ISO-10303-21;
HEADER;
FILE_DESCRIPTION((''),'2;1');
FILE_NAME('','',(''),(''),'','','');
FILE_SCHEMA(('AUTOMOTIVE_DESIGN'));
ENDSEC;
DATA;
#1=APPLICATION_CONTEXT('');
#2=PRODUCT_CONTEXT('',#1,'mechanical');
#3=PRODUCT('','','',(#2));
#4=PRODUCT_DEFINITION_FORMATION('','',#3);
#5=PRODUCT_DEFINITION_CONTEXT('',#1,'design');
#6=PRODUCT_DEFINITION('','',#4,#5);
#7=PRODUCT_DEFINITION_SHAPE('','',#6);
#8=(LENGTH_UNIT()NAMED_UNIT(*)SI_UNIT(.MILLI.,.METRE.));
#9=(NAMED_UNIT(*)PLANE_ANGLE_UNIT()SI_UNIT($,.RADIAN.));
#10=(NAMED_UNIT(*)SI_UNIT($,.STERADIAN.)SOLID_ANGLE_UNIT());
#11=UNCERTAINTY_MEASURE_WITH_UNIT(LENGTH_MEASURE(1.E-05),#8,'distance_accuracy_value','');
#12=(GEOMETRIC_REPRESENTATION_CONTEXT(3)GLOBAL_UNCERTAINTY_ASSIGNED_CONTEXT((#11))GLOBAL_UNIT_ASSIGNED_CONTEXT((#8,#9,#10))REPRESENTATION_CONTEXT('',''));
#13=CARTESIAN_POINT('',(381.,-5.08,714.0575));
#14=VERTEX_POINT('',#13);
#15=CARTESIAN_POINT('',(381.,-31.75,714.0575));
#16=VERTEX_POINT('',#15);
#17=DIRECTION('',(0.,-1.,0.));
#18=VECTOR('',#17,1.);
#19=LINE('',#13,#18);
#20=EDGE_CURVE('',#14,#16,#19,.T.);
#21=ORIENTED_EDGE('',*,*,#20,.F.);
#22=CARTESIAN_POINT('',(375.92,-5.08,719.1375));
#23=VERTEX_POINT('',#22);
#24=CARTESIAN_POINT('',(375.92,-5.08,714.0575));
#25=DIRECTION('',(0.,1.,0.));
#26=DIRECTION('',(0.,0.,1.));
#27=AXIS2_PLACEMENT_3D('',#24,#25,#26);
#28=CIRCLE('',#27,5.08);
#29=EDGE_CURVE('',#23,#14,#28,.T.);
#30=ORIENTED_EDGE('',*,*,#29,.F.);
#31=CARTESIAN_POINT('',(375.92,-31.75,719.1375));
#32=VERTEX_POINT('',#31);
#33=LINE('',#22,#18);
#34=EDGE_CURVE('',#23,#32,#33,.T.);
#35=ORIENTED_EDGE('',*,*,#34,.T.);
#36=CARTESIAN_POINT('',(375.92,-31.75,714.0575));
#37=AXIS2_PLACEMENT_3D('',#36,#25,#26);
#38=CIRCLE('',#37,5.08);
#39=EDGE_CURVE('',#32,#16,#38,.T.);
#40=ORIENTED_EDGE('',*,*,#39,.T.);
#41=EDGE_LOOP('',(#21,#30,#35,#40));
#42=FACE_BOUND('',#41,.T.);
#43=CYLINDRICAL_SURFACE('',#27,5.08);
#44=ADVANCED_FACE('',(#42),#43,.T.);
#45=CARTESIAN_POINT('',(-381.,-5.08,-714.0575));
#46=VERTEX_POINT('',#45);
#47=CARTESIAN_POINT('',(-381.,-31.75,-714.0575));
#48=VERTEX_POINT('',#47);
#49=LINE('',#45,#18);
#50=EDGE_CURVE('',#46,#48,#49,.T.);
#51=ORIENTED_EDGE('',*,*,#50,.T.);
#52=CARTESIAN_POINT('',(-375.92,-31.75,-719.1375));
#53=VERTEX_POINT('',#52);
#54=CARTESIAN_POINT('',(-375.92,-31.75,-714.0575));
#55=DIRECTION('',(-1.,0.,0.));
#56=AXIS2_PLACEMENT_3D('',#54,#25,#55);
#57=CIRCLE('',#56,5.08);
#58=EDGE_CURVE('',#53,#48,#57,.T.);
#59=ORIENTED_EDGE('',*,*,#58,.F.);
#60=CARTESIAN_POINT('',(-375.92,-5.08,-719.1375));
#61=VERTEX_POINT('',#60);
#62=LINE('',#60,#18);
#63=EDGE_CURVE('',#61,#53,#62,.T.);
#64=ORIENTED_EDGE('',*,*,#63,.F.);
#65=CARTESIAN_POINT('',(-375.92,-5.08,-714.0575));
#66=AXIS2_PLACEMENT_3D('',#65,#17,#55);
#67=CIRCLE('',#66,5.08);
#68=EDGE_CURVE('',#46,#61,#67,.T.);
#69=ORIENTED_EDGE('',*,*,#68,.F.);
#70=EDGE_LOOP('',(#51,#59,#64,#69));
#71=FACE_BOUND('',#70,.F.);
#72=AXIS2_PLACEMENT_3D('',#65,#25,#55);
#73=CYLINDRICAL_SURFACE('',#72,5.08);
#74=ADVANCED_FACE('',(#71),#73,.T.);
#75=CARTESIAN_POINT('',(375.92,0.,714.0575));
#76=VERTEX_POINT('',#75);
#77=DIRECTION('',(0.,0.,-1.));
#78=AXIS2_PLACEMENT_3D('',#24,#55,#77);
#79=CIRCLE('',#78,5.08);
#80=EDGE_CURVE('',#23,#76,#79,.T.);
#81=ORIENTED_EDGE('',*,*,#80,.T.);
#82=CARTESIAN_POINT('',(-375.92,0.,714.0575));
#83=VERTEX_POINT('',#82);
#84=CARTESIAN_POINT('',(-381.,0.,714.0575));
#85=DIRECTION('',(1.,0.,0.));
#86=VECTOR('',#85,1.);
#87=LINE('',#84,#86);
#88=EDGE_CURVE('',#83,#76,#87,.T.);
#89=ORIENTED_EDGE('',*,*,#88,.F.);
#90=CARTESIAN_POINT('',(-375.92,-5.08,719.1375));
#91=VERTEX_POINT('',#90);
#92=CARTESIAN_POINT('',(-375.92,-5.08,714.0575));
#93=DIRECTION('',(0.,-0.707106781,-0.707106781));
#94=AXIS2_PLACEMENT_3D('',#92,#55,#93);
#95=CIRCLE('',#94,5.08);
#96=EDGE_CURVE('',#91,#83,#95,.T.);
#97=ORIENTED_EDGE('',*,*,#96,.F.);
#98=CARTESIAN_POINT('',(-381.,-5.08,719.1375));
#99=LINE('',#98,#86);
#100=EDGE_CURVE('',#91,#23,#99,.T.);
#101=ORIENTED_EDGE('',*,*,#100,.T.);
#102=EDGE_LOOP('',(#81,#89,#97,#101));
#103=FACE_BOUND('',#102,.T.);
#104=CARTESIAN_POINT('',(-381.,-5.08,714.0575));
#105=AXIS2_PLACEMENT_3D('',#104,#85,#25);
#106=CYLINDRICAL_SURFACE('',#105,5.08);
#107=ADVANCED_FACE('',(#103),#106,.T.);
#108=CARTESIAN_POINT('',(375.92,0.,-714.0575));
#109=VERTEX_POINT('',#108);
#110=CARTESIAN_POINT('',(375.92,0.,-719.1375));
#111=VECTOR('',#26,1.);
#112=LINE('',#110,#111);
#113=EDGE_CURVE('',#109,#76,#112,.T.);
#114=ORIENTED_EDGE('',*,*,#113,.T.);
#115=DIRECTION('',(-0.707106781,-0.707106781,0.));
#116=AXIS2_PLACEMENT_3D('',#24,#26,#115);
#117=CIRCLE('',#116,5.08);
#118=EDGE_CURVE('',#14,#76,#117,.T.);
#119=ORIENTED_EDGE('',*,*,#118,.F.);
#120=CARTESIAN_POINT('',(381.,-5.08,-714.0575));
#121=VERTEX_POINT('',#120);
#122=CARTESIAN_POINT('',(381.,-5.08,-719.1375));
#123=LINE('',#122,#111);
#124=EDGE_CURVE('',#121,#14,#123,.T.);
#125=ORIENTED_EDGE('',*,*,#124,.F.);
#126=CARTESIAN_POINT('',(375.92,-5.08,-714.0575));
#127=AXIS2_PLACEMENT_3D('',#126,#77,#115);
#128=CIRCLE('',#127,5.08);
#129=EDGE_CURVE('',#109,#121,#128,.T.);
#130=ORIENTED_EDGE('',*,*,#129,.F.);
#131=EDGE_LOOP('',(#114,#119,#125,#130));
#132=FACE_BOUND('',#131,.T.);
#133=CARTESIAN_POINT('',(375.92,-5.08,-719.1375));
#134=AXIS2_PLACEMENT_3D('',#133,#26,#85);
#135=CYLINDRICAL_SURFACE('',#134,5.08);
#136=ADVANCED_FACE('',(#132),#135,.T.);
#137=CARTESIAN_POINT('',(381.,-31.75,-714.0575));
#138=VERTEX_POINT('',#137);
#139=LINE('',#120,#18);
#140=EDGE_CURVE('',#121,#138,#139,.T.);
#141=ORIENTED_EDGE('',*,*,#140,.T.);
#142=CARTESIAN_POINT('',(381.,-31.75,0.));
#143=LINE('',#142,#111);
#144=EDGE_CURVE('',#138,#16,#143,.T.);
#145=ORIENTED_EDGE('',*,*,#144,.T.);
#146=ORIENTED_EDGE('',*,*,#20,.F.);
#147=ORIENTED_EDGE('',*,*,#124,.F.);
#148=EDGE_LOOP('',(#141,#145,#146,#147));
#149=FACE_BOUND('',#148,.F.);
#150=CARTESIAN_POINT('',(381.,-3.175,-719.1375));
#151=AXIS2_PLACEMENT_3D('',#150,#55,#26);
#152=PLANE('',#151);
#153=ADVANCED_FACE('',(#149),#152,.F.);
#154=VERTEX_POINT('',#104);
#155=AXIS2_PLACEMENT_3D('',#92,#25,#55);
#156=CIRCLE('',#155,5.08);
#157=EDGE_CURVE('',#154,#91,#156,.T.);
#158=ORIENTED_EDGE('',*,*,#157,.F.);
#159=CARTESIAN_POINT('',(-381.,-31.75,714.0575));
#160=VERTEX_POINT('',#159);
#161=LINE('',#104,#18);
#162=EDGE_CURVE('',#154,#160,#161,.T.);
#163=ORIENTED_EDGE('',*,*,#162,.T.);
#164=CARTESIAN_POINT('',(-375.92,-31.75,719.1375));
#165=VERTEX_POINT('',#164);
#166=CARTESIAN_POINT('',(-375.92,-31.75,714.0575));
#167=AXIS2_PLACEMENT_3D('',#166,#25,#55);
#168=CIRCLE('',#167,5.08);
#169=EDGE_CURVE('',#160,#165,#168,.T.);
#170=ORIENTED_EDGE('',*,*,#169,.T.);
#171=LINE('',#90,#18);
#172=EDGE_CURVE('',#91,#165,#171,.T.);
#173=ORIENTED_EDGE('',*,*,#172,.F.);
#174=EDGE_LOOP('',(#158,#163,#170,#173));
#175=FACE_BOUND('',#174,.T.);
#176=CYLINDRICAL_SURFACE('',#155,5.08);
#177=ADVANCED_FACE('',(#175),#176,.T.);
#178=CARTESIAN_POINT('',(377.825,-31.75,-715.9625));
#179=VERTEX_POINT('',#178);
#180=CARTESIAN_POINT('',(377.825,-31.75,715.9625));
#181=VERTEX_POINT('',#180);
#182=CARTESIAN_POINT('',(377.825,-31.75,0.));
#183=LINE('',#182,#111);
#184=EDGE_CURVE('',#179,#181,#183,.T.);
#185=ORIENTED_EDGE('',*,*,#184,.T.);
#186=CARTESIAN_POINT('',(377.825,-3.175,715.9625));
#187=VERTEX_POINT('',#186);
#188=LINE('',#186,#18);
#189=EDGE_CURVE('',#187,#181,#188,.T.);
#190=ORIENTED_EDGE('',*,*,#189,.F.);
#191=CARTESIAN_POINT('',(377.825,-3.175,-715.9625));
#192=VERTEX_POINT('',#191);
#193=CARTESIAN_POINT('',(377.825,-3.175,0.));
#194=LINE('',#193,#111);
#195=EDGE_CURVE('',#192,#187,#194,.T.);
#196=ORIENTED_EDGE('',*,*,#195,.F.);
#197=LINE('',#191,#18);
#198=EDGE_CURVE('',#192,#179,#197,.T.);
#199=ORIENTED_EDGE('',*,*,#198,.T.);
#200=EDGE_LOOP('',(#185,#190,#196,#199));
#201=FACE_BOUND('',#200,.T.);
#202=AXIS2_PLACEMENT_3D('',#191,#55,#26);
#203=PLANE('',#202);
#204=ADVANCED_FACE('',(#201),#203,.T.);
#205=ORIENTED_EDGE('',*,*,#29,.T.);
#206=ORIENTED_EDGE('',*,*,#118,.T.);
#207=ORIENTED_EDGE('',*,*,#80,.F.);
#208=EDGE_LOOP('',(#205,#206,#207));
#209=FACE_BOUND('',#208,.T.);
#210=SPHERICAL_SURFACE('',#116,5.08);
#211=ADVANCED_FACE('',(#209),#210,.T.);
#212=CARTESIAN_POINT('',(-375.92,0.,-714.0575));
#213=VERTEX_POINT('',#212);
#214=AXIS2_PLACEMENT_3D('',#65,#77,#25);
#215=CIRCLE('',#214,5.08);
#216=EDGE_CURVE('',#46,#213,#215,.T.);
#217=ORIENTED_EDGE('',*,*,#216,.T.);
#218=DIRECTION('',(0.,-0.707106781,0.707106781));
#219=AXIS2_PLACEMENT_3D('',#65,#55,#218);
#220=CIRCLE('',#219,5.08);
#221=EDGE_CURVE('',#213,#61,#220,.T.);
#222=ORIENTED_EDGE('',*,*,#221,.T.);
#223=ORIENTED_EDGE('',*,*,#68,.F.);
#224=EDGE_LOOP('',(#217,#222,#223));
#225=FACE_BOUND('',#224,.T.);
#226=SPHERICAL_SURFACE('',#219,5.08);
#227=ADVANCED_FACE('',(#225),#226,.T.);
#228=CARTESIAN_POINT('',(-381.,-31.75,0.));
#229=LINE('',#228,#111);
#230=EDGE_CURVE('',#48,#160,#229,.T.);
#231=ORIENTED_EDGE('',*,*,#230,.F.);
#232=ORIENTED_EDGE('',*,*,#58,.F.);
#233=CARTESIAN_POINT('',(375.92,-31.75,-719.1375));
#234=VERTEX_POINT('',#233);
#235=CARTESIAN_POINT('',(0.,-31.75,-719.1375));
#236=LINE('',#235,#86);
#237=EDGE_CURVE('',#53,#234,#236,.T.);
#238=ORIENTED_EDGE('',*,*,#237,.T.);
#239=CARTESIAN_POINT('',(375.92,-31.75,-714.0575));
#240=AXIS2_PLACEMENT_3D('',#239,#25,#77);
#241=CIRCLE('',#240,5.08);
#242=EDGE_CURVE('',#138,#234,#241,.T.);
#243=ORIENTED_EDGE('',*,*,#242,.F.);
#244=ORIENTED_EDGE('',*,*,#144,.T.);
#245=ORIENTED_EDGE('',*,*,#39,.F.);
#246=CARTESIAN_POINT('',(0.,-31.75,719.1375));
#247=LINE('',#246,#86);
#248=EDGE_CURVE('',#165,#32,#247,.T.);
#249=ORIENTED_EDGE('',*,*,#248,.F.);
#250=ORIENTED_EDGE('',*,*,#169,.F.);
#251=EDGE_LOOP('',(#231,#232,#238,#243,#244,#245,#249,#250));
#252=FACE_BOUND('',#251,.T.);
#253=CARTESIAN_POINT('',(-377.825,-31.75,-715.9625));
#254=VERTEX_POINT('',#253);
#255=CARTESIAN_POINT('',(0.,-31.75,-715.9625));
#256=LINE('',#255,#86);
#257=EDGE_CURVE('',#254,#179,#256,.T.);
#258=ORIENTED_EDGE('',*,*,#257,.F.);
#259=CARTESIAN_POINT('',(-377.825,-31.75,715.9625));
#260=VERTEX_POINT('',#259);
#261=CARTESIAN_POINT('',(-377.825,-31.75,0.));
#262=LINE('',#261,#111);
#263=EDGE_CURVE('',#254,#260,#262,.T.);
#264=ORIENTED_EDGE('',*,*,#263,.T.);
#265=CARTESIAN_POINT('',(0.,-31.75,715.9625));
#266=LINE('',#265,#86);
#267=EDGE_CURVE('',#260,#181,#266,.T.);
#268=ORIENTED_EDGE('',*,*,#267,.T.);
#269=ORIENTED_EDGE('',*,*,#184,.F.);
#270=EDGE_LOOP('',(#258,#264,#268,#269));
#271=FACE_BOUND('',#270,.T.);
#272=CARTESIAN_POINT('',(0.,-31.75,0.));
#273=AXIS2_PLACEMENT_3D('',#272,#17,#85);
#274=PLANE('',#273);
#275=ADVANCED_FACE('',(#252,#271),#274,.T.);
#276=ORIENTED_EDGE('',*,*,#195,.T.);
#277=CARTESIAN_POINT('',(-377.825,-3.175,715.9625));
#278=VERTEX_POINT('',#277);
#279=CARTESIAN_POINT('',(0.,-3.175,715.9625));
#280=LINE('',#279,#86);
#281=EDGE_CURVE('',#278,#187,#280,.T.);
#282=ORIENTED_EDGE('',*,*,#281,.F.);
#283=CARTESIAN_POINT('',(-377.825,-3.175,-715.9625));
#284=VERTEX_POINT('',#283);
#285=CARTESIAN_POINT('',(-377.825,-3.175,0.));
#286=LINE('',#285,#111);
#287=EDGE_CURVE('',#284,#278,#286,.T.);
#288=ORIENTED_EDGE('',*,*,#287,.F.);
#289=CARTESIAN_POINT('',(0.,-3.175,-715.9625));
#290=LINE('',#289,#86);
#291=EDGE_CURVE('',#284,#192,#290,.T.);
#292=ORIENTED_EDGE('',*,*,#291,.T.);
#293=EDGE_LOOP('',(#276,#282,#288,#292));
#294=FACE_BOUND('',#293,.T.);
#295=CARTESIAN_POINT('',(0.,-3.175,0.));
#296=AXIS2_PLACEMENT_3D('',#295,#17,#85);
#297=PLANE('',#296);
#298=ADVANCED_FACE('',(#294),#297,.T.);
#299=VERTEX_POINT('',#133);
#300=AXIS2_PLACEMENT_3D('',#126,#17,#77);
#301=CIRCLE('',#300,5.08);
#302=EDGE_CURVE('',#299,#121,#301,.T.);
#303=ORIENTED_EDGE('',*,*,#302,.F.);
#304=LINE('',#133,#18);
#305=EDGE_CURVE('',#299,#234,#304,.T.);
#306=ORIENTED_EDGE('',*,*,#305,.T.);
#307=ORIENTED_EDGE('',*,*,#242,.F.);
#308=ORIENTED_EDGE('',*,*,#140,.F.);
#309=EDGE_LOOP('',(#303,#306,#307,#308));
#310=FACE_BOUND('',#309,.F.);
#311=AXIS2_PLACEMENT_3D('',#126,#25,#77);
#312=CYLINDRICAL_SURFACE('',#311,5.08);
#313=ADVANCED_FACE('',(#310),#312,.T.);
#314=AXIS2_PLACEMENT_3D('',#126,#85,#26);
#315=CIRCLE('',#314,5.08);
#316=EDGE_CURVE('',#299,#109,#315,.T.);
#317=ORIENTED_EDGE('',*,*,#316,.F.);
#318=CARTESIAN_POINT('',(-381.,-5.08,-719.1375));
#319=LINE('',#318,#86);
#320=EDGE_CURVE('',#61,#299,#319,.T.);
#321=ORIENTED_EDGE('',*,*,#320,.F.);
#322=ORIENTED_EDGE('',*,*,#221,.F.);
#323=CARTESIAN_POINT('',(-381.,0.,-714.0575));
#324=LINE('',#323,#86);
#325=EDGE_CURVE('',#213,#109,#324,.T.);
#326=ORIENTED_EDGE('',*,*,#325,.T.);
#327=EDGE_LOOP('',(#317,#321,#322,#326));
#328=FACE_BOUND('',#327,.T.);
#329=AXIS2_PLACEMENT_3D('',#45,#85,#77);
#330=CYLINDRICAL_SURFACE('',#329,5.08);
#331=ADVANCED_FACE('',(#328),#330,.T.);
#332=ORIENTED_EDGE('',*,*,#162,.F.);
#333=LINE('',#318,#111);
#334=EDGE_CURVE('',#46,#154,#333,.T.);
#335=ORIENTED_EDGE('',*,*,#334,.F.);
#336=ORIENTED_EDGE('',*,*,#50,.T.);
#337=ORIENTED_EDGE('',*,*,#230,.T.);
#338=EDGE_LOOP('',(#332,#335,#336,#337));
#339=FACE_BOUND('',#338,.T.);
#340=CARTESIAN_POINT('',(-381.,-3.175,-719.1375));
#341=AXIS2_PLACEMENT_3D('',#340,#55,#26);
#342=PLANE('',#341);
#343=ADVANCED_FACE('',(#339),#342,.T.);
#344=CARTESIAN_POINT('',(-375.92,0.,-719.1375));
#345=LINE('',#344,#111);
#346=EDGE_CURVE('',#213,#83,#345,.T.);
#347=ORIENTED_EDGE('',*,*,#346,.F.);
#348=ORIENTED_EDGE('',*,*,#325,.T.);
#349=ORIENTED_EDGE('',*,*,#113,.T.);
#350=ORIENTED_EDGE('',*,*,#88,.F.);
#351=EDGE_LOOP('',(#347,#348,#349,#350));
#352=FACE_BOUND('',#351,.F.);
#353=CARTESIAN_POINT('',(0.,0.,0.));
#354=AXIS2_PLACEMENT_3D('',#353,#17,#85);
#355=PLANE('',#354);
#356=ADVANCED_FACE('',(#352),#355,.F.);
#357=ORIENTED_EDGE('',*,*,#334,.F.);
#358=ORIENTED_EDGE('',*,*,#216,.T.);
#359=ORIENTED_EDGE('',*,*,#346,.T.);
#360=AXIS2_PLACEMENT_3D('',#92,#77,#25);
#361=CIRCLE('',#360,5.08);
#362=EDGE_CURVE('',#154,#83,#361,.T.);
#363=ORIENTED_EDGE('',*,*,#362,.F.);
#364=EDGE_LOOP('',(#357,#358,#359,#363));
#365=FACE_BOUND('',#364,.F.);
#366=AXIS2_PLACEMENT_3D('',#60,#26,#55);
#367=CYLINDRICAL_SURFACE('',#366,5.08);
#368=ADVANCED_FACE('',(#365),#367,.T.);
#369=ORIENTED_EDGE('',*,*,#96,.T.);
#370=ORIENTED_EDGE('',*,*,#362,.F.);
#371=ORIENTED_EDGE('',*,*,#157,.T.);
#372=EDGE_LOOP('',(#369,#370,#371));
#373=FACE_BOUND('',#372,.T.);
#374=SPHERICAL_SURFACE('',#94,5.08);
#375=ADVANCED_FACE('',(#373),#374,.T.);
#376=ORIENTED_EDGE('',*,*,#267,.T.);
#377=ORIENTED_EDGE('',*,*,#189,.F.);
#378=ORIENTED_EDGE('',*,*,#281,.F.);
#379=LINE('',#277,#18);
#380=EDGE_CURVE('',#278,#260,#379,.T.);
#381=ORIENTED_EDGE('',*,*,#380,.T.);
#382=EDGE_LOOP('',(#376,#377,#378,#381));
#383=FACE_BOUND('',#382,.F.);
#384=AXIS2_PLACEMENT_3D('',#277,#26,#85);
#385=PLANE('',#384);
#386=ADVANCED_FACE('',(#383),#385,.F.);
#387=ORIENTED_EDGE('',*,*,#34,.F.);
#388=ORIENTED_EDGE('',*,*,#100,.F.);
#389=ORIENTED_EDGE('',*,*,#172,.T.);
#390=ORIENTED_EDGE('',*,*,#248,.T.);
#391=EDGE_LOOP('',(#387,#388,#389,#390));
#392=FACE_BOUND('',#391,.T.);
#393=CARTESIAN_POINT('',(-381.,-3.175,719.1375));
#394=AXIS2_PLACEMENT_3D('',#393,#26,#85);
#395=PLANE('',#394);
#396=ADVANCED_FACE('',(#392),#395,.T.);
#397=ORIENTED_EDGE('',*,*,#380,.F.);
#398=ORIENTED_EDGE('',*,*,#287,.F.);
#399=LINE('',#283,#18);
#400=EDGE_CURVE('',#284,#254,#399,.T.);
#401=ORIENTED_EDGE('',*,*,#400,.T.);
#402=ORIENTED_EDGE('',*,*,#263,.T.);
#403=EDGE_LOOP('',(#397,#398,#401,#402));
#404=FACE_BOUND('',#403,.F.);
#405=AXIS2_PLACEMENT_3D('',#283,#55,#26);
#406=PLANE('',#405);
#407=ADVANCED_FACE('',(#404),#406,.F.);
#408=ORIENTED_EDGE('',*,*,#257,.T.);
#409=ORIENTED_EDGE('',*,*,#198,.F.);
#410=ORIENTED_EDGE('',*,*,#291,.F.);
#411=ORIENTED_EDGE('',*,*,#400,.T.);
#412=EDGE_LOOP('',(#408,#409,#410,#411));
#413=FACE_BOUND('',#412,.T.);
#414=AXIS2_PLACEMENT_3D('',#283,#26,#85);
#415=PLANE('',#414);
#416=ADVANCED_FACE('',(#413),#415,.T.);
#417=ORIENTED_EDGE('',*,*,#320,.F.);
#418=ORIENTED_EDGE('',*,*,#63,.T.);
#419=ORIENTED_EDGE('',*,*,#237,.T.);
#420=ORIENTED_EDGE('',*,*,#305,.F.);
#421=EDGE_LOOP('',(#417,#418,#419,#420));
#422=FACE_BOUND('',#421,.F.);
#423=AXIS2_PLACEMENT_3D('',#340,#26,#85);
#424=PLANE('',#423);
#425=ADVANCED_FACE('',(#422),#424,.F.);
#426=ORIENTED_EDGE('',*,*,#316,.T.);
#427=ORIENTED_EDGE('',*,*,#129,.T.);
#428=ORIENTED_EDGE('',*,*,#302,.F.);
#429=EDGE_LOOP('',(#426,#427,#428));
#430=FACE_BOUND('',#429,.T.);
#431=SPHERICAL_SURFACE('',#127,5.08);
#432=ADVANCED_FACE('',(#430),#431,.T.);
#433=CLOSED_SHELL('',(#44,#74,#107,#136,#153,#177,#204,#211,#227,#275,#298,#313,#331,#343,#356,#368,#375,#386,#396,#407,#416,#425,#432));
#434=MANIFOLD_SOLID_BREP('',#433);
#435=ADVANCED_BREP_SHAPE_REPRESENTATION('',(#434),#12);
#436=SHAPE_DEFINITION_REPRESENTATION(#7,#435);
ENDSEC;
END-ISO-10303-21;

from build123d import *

# Parameters (mm, degrees)
F0_W         = 762
F0_H         = 1438.275
F1_DEPTH     = 3.175
F2_W         = 762
F2_H         = 1438.275
F2_W_2       = 755.65
F2_H_2       = 1431.925
F3_DEPTH     = 28.575
F4_R         = 5.08
F5_T1_DEPTH  = 39.37
F5_S5_W      = 5.1816
F5_S5_H      = 5.1816
F5_T6_DEPTH  = 5.1816
F5_S11_W     = 5.1816
F5_S11_H     = 5.1816
F5_T12_DEPTH = 5.1816
F5_S17_W     = 5.1816
F5_S17_H     = 5.1816
F5_T18_DEPTH = 5.1816
F5_S23_W     = 5.1816
F5_S23_H     = 5.1816
F5_T24_DEPTH = 5.1816


# Not quite as in the source:
# - a fillet or chamfer that OpenCascade refuses, or shapes differently, is made with other operations: its cross-section is extruded or revolved along the edge and cut away or added


with BuildPart() as f1:
    # F0 (on Front) → F1 (new body)
    with BuildSketch(Plane.XZ):
        Rectangle(F0_W, F0_H)
    extrude(amount=F1_DEPTH)

    # F2 (on face) → F3 (join)
    with BuildSketch(Plane.XZ.offset(3.175)):
        Rectangle(F2_W, F2_H)
        Rectangle(F2_W_2, F2_H_2, mode=Mode.SUBTRACT)
    extrude(amount=F3_DEPTH)

    # F4
    f4_edges = [f1.edges().sort_by_distance(p)[0] for p in [
        (0, 0, -719.1375),
        (381, 0, 0),
        (-381, 0, 0),
        (0, 0, 719.1375),
    ]]
    fillet(f4_edges, radius=F4_R)

    # F5: fillet of radius 5.08 on 4 edges, made by hand

    # F5_s2 → F5_t1 (cut)
    with BuildSketch(Plane.XZ.offset(5.08)):
        with BuildLine():
            ThreePointArc((-381, 714.0575), (-379.5121024484, 717.6496024484), (-375.92, 719.1375))
            Line((-375.92, 719.1375), (-381, 719.1375))
            Line((-381, 719.1375), (-381, 714.0575))
        make_face()
        with BuildLine():
            ThreePointArc((375.92, 719.1375), (379.5121024484, 717.6496024484), (381, 714.0575))
            Line((381, 714.0575), (381, 719.1375))
            Line((381, 719.1375), (375.92, 719.1375))
        make_face()
        with BuildLine():
            ThreePointArc((375.92, -719.1375), (379.5121024484, -717.6496024484), (381, -714.0575))
            Line((381, -714.0575), (381, -719.1375))
            Line((381, -719.1375), (375.92, -719.1375))
        make_face()
        with BuildLine():
            ThreePointArc((-381, -714.0575), (-379.5121024484, -717.6496024484), (-375.92, -719.1375))
            Line((-375.92, -719.1375), (-381, -719.1375))
            Line((-381, -719.1375), (-381, -714.0575))
        make_face()
    extrude(amount=F5_T1_DEPTH, mode=Mode.SUBTRACT)


with BuildPart() as f5_tool4:
    # F5_s5 → F5_t6 (new body)
    with BuildSketch(Plane.YZ.offset(-375.92)):
        with Locations((-2.4892, -716.6483)):
            Rectangle(F5_S5_W, F5_S5_H)
    extrude(amount=-F5_T6_DEPTH)

    # F5_s7 → F5_t8 (revolve, cut)
    with BuildSketch(Plane(origin=(-375.92, -5.08, -714.0575), x_dir=(0, -0.7071067812, 0.7071067812), z_dir=(0, -0.7071067812, -0.7071067812))):
        with BuildLine():
            ThreePointArc((0, -5.08), (5.08, 0), (0, 5.08))
            Line((0, 5.08), (0, -5.08))
        make_face()
    revolve(axis=Axis((-375.92, -5.08, -714.0575), (-1, 0, 0)), mode=Mode.SUBTRACT)


with BuildPart() as f1_1:
    add(f1.part)

    # F5_t3: cut F5_tool4
    add(f5_tool4.part, mode=Mode.SUBTRACT)


with BuildPart() as f5_tool10:
    # F5_s11 → F5_t12 (new body)
    with BuildSketch(Plane.XY.offset(-714.0575)):
        with Locations((378.5108, -2.4892)):
            Rectangle(F5_S11_W, F5_S11_H)
    extrude(amount=-F5_T12_DEPTH)

    # F5_s13 → F5_t14 (revolve, cut)
    with BuildSketch(Plane(origin=(375.92, -5.08, -714.0575), x_dir=(-0.7071067812, -0.7071067812, 0), z_dir=(0.7071067812, -0.7071067812, 0))):
        with BuildLine():
            ThreePointArc((0, -5.08), (5.08, 0), (0, 5.08))
            Line((0, 5.08), (0, -5.08))
        make_face()
    revolve(axis=Axis((375.92, -5.08, -714.0575), (0, 0, -1)), mode=Mode.SUBTRACT)


with BuildPart() as f1_2:
    add(f1_1.part)

    # F5_t9: cut F5_tool10
    add(f5_tool10.part, mode=Mode.SUBTRACT)


with BuildPart() as f5_tool16:
    # F5_s17 → F5_t18 (new body)
    with BuildSketch(Plane.XY.offset(714.0575)):
        with Locations((378.5108, -2.4892)):
            Rectangle(F5_S17_W, F5_S17_H)
    extrude(amount=F5_T18_DEPTH)

    # F5_s19 → F5_t20 (revolve, cut)
    with BuildSketch(Plane(origin=(375.92, -5.08, 714.0575), x_dir=(-0.7071067812, -0.7071067812, 0), z_dir=(-0.7071067812, 0.7071067812, 0))):
        with BuildLine():
            ThreePointArc((0, -5.08), (5.08, 0), (0, 5.08))
            Line((0, 5.08), (0, -5.08))
        make_face()
    revolve(axis=Axis((375.92, -5.08, 714.0575), (0, 0, 1)), mode=Mode.SUBTRACT)


with BuildPart() as f1_3:
    add(f1_2.part)

    # F5_t15: cut F5_tool16
    add(f5_tool16.part, mode=Mode.SUBTRACT)


with BuildPart() as f5_tool22:
    # F5_s23 → F5_t24 (new body)
    with BuildSketch(Plane.YZ.offset(-375.92)):
        with Locations((-2.4892, 716.6483)):
            Rectangle(F5_S23_W, F5_S23_H)
    extrude(amount=-F5_T24_DEPTH)

    # F5_s25 → F5_t26 (revolve, cut)
    with BuildSketch(Plane(origin=(-375.92, -5.08, 714.0575), x_dir=(0, -0.7071067812, -0.7071067812), z_dir=(0, 0.7071067812, -0.7071067812))):
        with BuildLine():
            ThreePointArc((0, -5.08), (5.08, 0), (0, 5.08))
            Line((0, 5.08), (0, -5.08))
        make_face()
    revolve(axis=Axis((-375.92, -5.08, 714.0575), (-1, 0, 0)), mode=Mode.SUBTRACT)


with BuildPart() as f1_4:
    add(f1_3.part)

    # F5_t21: cut F5_tool22
    add(f5_tool22.part, mode=Mode.SUBTRACT)


solid = f1_4.part
